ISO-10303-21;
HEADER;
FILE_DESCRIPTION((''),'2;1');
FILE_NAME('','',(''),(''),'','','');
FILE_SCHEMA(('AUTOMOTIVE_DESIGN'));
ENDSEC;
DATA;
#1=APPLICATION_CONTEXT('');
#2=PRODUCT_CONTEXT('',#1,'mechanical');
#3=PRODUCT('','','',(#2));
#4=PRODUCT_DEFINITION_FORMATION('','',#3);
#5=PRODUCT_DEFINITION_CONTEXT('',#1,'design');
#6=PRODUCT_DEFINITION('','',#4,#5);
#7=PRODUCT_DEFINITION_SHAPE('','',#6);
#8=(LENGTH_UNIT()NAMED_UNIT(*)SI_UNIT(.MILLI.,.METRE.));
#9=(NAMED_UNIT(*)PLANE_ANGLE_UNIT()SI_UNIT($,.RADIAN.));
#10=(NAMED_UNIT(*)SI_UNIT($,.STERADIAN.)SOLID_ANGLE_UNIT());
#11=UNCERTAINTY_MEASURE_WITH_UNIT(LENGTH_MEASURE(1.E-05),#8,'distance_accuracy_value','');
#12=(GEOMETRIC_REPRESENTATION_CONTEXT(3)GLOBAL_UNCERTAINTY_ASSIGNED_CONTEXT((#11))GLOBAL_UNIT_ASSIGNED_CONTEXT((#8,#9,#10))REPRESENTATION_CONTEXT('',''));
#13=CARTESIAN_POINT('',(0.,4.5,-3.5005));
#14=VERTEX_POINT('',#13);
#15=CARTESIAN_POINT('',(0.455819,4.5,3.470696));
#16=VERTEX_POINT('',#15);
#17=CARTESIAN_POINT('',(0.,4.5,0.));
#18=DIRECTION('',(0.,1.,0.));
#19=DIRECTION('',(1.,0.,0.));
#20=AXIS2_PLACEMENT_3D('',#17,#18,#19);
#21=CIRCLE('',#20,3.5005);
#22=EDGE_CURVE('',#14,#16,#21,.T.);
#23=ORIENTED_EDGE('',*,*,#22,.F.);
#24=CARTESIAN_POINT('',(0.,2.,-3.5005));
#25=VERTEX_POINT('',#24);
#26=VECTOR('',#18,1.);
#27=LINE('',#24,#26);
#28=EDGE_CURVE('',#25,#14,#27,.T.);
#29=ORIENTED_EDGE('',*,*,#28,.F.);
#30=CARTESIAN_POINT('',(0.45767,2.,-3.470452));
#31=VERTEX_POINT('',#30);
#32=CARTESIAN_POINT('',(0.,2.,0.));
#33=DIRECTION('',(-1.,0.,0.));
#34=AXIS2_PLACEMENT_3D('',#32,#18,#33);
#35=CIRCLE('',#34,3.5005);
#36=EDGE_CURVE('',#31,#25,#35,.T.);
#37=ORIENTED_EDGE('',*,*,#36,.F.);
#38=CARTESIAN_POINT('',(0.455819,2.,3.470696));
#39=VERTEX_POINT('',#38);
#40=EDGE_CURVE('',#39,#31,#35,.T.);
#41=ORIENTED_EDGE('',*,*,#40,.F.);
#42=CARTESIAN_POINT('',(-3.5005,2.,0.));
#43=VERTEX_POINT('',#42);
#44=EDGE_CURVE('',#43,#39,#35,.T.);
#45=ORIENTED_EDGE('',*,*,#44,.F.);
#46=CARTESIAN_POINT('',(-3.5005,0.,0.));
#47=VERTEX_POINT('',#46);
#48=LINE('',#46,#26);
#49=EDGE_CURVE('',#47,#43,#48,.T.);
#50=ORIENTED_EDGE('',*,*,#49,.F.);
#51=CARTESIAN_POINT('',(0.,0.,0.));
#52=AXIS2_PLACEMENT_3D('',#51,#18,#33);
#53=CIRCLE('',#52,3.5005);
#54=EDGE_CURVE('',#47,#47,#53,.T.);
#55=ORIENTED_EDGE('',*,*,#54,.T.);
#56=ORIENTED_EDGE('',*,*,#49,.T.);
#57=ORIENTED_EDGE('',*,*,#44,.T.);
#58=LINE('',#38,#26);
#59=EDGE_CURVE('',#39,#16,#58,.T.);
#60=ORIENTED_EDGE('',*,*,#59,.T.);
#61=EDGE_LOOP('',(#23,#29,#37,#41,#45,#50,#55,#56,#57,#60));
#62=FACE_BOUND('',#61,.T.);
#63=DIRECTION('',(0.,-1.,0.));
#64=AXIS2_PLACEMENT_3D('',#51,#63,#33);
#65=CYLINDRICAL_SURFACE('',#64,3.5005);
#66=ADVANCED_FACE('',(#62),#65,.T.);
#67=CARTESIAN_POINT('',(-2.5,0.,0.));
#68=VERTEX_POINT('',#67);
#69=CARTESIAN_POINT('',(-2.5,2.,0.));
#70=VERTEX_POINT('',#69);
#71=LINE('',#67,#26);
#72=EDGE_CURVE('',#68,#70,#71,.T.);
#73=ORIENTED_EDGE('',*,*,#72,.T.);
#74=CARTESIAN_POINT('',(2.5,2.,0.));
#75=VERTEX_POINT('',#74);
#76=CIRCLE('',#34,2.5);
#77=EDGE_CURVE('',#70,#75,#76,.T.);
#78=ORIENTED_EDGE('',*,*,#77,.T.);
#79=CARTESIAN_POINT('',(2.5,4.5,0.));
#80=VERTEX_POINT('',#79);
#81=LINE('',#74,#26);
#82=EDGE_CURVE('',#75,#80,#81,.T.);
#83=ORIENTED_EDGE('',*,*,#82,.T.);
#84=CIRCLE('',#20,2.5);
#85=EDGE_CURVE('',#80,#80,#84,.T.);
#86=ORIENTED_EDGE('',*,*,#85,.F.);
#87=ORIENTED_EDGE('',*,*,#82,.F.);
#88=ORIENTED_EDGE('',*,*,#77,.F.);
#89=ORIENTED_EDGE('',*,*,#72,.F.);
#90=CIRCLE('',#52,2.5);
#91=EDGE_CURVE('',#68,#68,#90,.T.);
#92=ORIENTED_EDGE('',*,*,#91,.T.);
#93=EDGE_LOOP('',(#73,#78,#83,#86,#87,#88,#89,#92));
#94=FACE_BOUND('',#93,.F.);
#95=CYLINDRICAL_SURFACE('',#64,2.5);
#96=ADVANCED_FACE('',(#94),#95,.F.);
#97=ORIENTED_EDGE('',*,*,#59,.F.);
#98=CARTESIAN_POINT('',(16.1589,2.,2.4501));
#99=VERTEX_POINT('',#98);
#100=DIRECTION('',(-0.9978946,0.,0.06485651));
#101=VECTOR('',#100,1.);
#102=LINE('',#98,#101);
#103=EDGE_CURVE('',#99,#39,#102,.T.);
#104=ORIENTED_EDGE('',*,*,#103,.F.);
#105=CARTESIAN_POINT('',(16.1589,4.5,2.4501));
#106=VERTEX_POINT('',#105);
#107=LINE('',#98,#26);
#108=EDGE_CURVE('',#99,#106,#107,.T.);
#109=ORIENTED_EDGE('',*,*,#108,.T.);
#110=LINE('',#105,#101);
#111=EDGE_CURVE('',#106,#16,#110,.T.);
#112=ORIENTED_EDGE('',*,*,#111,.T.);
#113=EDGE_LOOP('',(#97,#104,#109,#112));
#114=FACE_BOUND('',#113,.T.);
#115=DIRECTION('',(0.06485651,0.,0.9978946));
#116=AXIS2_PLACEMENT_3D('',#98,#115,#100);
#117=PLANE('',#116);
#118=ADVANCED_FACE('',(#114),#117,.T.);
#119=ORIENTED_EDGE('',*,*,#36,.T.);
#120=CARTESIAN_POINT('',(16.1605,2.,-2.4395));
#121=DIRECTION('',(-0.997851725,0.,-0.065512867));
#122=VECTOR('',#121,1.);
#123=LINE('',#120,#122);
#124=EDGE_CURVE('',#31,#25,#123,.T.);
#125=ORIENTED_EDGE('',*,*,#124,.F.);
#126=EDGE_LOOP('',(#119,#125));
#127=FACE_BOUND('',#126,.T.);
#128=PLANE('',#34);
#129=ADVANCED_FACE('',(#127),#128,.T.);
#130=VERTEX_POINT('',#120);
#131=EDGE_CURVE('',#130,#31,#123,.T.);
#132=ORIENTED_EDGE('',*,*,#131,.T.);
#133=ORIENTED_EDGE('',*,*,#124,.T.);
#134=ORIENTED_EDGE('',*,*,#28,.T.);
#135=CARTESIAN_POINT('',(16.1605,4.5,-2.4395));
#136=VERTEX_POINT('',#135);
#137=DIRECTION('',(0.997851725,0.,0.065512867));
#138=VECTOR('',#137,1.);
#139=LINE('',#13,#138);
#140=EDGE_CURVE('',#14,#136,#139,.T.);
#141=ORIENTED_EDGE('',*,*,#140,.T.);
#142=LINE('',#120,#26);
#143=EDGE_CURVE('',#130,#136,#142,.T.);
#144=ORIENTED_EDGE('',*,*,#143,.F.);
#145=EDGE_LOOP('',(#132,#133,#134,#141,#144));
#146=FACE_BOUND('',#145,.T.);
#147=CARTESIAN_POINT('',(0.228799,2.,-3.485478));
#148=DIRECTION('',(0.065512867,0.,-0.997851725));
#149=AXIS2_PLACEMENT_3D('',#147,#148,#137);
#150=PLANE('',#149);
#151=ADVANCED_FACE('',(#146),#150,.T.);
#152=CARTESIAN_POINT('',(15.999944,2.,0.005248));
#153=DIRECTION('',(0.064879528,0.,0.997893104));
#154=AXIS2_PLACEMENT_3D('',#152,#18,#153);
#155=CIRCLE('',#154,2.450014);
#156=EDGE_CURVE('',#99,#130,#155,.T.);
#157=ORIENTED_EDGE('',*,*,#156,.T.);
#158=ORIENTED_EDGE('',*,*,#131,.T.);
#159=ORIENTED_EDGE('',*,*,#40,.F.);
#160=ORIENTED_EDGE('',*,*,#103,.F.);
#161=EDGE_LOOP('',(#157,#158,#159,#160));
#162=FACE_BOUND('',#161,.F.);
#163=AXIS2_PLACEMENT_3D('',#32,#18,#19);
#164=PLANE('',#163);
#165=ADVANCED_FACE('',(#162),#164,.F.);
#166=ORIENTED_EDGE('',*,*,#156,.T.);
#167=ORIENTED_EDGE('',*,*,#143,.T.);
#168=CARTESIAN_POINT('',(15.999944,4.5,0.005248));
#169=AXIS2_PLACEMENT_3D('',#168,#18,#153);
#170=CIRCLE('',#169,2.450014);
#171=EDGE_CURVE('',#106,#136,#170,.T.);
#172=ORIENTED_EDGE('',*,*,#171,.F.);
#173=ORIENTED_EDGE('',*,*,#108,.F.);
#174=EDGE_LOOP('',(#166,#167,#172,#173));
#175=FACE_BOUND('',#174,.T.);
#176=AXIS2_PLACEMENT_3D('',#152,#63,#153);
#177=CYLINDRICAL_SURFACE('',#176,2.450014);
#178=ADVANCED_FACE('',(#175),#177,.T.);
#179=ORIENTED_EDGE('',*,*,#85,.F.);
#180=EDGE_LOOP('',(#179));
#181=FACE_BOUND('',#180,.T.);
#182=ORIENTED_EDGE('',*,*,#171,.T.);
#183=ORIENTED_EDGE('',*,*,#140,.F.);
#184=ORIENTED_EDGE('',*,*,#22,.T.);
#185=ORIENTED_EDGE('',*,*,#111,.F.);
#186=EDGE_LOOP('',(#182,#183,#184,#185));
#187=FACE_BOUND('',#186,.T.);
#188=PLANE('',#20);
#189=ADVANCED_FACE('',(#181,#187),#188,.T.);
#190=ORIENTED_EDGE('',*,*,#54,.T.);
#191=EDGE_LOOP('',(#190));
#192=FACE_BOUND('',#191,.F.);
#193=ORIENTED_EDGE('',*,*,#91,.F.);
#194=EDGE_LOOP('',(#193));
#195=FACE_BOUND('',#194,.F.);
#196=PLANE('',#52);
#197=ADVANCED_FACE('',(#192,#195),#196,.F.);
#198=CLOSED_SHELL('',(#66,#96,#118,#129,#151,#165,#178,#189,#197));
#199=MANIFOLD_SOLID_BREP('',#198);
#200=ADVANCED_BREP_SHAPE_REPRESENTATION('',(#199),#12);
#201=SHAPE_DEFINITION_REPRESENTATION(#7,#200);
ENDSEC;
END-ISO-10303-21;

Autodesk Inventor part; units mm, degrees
ref_plane "YZ Plane" through (0, 0, 0) normal (1, 0, 0) x (0, 1, 0)
ref_plane "XZ Plane" through (0, 0, 0) normal (0, 1, 0) x (-1, 0, 0)
sketch "Sketch1" plane through (0, 0, 0) normal (0, 1, 0) x (-1, 0, 0)
  circle A0 centre (0, 0) radius 3.5005
  circle A1 centre (0, 0) radius 2.5
  dimension "d0" = 7.001
  dimension "d1" = 5.0001
extrude "Extrusion1" add sketch "Sketch1" along normal blind 2
ref_plane "Work Plane1" through (0, 2, 0) normal (0, 1, 0) x (1, 0, 0)
sketch "Sketch2" plane through (0, 2, 0) normal (0, 1, 0) x (1, 0, 0)
  arc A0 (0.2288, 3.4855) -> (0.2265, -3.4856) centre (0, 0) ccw
  arc A1 (16.1589, -2.4501) -> (16.1605, 2.4395) centre (16, -0.0053) ccw
  circle A2 centre (0, 0) radius 3.5005 projected
  line L0 (0, 3.5005) -> (16.1605, 2.4395)
  line L1 (16.1589, -2.4501) -> (0.2265, -3.4856)
  circle A3 centre (0, 0) radius 2.5 projected
  circle A4 centre (0, 0) radius 2.5
  dimension "d5" = 4.9
  dimension "d6" = 16
extrude "Extrusion2" add sketch "Sketch2" along normal blind 2.5 contours L0 A2 L1 A0 | A0 L1 A2 L0 | L0 A1 L1 A2
properties part number "eje de motor"
